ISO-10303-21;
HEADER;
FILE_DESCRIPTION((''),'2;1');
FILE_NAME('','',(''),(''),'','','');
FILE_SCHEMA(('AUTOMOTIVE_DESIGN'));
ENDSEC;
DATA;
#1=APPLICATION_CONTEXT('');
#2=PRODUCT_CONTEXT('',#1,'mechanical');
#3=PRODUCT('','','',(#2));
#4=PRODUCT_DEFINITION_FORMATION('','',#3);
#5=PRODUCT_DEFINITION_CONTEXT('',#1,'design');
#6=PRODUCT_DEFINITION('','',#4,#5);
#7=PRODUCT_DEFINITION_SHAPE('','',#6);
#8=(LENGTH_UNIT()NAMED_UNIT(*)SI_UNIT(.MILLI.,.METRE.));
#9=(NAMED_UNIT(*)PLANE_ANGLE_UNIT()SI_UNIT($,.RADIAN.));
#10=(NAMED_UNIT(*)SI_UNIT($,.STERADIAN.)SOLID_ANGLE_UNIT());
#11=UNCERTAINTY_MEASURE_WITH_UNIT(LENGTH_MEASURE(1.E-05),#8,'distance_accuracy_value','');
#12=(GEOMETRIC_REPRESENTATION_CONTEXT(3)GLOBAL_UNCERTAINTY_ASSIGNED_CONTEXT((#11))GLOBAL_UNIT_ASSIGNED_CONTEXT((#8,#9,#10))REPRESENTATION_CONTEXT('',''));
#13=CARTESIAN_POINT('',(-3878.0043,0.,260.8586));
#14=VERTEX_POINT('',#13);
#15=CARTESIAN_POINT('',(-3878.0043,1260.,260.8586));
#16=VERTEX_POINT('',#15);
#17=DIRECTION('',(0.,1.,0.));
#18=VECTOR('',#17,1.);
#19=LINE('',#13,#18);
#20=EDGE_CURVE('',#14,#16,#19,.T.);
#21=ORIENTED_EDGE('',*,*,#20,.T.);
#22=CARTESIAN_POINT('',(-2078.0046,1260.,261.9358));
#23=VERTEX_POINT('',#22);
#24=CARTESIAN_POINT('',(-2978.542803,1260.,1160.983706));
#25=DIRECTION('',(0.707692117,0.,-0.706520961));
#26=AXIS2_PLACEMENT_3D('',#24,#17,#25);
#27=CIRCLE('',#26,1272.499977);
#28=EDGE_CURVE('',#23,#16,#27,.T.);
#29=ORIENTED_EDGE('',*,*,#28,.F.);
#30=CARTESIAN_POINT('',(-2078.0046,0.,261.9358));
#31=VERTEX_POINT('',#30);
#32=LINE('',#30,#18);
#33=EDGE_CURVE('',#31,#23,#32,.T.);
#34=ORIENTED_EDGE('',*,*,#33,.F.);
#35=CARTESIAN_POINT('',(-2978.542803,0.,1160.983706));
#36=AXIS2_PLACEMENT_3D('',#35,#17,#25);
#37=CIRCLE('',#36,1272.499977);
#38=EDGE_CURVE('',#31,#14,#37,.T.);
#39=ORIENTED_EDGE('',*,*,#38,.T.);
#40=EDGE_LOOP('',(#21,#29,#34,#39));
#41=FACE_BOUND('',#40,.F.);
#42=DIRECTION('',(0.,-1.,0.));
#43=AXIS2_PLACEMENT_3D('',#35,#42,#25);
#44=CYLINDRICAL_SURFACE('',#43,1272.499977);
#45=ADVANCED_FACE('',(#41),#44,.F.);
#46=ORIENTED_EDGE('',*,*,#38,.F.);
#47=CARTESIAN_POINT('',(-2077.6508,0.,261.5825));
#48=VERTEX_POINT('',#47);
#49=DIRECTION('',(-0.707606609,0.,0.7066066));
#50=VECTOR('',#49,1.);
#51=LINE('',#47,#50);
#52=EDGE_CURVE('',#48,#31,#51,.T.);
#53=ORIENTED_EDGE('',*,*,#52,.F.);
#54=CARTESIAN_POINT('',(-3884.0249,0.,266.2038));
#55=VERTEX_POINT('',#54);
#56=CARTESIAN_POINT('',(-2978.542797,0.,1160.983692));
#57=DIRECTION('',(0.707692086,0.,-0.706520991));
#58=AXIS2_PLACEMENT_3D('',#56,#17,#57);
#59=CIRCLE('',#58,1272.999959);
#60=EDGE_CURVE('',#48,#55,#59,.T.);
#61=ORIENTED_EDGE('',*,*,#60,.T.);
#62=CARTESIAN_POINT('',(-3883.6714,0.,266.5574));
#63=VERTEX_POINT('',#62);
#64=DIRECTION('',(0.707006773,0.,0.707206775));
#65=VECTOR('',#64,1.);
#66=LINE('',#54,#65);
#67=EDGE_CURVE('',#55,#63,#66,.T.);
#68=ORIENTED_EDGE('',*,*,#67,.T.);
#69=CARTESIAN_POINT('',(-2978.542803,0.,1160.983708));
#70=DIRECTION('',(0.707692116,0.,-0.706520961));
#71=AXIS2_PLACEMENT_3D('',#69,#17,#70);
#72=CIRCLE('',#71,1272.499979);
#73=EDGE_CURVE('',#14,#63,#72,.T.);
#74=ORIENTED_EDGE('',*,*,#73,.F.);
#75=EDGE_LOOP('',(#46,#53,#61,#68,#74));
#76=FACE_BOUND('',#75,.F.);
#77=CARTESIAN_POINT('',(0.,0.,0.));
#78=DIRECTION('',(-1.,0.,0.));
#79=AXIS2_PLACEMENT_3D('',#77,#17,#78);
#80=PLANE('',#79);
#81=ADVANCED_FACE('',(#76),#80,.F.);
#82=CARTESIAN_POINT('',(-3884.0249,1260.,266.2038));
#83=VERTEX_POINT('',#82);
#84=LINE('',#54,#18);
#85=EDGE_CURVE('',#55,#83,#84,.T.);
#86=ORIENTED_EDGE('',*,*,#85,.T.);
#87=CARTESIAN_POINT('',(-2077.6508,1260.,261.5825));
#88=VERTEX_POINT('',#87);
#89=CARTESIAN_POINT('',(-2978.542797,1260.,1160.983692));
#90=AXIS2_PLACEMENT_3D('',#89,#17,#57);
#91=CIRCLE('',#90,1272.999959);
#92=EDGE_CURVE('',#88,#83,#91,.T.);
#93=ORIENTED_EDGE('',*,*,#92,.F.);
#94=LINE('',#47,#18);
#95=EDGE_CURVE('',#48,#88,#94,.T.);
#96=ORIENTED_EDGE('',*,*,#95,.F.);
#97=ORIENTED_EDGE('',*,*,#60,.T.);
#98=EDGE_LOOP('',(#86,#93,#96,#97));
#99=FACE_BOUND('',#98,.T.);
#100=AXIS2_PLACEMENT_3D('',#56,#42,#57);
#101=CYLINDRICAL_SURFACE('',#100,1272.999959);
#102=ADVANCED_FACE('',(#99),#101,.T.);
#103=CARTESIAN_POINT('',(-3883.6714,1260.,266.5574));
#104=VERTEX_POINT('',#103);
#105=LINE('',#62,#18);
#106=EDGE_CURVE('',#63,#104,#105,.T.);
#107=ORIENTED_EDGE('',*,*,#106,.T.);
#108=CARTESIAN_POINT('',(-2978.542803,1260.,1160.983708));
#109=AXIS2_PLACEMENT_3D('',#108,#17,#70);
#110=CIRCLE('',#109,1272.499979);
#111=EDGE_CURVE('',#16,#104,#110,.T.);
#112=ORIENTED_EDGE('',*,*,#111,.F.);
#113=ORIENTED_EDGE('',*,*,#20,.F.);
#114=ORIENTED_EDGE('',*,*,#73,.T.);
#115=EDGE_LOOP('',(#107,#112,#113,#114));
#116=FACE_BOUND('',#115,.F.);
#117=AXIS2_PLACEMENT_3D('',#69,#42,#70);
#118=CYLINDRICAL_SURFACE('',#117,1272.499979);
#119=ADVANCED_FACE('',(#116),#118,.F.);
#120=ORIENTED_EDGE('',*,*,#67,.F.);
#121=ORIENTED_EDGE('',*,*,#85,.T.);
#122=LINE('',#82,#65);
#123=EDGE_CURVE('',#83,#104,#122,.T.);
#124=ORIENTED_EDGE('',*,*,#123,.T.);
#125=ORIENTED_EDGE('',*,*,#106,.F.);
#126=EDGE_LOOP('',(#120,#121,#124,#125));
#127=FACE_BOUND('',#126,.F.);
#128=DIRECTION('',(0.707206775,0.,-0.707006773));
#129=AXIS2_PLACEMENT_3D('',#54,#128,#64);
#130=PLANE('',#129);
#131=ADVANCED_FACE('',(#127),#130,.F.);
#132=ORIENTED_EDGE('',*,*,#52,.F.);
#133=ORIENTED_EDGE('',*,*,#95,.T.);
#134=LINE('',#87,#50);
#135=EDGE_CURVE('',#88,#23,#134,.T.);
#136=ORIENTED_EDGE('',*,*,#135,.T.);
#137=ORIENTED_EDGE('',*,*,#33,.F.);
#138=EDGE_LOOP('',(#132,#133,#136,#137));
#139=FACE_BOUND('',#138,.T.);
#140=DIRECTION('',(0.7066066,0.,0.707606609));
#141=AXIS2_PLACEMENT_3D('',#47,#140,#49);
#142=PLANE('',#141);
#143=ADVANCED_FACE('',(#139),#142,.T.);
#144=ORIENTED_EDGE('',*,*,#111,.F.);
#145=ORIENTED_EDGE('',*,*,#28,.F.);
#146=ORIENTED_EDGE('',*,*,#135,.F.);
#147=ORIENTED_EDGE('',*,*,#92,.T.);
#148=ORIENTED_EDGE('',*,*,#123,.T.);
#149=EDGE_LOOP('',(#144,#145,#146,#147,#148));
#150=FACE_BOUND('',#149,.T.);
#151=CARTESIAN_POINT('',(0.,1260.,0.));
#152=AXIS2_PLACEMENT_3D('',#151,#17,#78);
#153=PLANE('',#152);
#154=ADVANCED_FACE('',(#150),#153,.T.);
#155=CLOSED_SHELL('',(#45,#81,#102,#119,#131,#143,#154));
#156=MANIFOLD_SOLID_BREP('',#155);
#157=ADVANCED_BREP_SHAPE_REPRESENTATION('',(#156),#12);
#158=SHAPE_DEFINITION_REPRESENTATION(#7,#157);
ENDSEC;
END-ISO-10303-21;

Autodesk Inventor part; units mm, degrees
ref_plane "YZ Plane" through (0, 0, 0) normal (1, 0, 0) x (0, 1, 0)
ref_plane "XZ Plane" through (0, 0, 0) normal (0, 1, 0) x (-1, 0, 0)
ref_plane "XY Plane" through (0, 0, 0) normal (0, 0, 1) x (1, 0, 0)
sketch "Sketch1" plane through (0, 0, 0) normal (0, 1, 0) x (-1, 0, 0)
  arc A0 (2077.6508, 261.5825) -> (3884.0249, 266.2038) centre (2978.5428, 1160.9837) ccw
  arc A1 (2078.0046, 261.9358) -> (3878.0043, 260.8586) centre (2978.5428, 1160.9837) ccw
  line L0 (2077.6508, 261.5825) -> (2078.0046, 261.9358)
  line L1 (3884.0249, 266.2038) -> (3883.6714, 266.5574)
  arc A2 (2078.0046, 261.9358) -> (3883.6714, 266.5574) centre (2978.5428, 1160.9837) ccw
  point P0 (0, 0)
  dimension "d9" = 0.5
  dimension "d16" = 1800
  dimension "d22" = 1273
extrude "Extrusion1" add sketch "Sketch1" along normal blind 1260
properties part number "Chapa_Inox" material "Aço AISI 1020 107 HR"
